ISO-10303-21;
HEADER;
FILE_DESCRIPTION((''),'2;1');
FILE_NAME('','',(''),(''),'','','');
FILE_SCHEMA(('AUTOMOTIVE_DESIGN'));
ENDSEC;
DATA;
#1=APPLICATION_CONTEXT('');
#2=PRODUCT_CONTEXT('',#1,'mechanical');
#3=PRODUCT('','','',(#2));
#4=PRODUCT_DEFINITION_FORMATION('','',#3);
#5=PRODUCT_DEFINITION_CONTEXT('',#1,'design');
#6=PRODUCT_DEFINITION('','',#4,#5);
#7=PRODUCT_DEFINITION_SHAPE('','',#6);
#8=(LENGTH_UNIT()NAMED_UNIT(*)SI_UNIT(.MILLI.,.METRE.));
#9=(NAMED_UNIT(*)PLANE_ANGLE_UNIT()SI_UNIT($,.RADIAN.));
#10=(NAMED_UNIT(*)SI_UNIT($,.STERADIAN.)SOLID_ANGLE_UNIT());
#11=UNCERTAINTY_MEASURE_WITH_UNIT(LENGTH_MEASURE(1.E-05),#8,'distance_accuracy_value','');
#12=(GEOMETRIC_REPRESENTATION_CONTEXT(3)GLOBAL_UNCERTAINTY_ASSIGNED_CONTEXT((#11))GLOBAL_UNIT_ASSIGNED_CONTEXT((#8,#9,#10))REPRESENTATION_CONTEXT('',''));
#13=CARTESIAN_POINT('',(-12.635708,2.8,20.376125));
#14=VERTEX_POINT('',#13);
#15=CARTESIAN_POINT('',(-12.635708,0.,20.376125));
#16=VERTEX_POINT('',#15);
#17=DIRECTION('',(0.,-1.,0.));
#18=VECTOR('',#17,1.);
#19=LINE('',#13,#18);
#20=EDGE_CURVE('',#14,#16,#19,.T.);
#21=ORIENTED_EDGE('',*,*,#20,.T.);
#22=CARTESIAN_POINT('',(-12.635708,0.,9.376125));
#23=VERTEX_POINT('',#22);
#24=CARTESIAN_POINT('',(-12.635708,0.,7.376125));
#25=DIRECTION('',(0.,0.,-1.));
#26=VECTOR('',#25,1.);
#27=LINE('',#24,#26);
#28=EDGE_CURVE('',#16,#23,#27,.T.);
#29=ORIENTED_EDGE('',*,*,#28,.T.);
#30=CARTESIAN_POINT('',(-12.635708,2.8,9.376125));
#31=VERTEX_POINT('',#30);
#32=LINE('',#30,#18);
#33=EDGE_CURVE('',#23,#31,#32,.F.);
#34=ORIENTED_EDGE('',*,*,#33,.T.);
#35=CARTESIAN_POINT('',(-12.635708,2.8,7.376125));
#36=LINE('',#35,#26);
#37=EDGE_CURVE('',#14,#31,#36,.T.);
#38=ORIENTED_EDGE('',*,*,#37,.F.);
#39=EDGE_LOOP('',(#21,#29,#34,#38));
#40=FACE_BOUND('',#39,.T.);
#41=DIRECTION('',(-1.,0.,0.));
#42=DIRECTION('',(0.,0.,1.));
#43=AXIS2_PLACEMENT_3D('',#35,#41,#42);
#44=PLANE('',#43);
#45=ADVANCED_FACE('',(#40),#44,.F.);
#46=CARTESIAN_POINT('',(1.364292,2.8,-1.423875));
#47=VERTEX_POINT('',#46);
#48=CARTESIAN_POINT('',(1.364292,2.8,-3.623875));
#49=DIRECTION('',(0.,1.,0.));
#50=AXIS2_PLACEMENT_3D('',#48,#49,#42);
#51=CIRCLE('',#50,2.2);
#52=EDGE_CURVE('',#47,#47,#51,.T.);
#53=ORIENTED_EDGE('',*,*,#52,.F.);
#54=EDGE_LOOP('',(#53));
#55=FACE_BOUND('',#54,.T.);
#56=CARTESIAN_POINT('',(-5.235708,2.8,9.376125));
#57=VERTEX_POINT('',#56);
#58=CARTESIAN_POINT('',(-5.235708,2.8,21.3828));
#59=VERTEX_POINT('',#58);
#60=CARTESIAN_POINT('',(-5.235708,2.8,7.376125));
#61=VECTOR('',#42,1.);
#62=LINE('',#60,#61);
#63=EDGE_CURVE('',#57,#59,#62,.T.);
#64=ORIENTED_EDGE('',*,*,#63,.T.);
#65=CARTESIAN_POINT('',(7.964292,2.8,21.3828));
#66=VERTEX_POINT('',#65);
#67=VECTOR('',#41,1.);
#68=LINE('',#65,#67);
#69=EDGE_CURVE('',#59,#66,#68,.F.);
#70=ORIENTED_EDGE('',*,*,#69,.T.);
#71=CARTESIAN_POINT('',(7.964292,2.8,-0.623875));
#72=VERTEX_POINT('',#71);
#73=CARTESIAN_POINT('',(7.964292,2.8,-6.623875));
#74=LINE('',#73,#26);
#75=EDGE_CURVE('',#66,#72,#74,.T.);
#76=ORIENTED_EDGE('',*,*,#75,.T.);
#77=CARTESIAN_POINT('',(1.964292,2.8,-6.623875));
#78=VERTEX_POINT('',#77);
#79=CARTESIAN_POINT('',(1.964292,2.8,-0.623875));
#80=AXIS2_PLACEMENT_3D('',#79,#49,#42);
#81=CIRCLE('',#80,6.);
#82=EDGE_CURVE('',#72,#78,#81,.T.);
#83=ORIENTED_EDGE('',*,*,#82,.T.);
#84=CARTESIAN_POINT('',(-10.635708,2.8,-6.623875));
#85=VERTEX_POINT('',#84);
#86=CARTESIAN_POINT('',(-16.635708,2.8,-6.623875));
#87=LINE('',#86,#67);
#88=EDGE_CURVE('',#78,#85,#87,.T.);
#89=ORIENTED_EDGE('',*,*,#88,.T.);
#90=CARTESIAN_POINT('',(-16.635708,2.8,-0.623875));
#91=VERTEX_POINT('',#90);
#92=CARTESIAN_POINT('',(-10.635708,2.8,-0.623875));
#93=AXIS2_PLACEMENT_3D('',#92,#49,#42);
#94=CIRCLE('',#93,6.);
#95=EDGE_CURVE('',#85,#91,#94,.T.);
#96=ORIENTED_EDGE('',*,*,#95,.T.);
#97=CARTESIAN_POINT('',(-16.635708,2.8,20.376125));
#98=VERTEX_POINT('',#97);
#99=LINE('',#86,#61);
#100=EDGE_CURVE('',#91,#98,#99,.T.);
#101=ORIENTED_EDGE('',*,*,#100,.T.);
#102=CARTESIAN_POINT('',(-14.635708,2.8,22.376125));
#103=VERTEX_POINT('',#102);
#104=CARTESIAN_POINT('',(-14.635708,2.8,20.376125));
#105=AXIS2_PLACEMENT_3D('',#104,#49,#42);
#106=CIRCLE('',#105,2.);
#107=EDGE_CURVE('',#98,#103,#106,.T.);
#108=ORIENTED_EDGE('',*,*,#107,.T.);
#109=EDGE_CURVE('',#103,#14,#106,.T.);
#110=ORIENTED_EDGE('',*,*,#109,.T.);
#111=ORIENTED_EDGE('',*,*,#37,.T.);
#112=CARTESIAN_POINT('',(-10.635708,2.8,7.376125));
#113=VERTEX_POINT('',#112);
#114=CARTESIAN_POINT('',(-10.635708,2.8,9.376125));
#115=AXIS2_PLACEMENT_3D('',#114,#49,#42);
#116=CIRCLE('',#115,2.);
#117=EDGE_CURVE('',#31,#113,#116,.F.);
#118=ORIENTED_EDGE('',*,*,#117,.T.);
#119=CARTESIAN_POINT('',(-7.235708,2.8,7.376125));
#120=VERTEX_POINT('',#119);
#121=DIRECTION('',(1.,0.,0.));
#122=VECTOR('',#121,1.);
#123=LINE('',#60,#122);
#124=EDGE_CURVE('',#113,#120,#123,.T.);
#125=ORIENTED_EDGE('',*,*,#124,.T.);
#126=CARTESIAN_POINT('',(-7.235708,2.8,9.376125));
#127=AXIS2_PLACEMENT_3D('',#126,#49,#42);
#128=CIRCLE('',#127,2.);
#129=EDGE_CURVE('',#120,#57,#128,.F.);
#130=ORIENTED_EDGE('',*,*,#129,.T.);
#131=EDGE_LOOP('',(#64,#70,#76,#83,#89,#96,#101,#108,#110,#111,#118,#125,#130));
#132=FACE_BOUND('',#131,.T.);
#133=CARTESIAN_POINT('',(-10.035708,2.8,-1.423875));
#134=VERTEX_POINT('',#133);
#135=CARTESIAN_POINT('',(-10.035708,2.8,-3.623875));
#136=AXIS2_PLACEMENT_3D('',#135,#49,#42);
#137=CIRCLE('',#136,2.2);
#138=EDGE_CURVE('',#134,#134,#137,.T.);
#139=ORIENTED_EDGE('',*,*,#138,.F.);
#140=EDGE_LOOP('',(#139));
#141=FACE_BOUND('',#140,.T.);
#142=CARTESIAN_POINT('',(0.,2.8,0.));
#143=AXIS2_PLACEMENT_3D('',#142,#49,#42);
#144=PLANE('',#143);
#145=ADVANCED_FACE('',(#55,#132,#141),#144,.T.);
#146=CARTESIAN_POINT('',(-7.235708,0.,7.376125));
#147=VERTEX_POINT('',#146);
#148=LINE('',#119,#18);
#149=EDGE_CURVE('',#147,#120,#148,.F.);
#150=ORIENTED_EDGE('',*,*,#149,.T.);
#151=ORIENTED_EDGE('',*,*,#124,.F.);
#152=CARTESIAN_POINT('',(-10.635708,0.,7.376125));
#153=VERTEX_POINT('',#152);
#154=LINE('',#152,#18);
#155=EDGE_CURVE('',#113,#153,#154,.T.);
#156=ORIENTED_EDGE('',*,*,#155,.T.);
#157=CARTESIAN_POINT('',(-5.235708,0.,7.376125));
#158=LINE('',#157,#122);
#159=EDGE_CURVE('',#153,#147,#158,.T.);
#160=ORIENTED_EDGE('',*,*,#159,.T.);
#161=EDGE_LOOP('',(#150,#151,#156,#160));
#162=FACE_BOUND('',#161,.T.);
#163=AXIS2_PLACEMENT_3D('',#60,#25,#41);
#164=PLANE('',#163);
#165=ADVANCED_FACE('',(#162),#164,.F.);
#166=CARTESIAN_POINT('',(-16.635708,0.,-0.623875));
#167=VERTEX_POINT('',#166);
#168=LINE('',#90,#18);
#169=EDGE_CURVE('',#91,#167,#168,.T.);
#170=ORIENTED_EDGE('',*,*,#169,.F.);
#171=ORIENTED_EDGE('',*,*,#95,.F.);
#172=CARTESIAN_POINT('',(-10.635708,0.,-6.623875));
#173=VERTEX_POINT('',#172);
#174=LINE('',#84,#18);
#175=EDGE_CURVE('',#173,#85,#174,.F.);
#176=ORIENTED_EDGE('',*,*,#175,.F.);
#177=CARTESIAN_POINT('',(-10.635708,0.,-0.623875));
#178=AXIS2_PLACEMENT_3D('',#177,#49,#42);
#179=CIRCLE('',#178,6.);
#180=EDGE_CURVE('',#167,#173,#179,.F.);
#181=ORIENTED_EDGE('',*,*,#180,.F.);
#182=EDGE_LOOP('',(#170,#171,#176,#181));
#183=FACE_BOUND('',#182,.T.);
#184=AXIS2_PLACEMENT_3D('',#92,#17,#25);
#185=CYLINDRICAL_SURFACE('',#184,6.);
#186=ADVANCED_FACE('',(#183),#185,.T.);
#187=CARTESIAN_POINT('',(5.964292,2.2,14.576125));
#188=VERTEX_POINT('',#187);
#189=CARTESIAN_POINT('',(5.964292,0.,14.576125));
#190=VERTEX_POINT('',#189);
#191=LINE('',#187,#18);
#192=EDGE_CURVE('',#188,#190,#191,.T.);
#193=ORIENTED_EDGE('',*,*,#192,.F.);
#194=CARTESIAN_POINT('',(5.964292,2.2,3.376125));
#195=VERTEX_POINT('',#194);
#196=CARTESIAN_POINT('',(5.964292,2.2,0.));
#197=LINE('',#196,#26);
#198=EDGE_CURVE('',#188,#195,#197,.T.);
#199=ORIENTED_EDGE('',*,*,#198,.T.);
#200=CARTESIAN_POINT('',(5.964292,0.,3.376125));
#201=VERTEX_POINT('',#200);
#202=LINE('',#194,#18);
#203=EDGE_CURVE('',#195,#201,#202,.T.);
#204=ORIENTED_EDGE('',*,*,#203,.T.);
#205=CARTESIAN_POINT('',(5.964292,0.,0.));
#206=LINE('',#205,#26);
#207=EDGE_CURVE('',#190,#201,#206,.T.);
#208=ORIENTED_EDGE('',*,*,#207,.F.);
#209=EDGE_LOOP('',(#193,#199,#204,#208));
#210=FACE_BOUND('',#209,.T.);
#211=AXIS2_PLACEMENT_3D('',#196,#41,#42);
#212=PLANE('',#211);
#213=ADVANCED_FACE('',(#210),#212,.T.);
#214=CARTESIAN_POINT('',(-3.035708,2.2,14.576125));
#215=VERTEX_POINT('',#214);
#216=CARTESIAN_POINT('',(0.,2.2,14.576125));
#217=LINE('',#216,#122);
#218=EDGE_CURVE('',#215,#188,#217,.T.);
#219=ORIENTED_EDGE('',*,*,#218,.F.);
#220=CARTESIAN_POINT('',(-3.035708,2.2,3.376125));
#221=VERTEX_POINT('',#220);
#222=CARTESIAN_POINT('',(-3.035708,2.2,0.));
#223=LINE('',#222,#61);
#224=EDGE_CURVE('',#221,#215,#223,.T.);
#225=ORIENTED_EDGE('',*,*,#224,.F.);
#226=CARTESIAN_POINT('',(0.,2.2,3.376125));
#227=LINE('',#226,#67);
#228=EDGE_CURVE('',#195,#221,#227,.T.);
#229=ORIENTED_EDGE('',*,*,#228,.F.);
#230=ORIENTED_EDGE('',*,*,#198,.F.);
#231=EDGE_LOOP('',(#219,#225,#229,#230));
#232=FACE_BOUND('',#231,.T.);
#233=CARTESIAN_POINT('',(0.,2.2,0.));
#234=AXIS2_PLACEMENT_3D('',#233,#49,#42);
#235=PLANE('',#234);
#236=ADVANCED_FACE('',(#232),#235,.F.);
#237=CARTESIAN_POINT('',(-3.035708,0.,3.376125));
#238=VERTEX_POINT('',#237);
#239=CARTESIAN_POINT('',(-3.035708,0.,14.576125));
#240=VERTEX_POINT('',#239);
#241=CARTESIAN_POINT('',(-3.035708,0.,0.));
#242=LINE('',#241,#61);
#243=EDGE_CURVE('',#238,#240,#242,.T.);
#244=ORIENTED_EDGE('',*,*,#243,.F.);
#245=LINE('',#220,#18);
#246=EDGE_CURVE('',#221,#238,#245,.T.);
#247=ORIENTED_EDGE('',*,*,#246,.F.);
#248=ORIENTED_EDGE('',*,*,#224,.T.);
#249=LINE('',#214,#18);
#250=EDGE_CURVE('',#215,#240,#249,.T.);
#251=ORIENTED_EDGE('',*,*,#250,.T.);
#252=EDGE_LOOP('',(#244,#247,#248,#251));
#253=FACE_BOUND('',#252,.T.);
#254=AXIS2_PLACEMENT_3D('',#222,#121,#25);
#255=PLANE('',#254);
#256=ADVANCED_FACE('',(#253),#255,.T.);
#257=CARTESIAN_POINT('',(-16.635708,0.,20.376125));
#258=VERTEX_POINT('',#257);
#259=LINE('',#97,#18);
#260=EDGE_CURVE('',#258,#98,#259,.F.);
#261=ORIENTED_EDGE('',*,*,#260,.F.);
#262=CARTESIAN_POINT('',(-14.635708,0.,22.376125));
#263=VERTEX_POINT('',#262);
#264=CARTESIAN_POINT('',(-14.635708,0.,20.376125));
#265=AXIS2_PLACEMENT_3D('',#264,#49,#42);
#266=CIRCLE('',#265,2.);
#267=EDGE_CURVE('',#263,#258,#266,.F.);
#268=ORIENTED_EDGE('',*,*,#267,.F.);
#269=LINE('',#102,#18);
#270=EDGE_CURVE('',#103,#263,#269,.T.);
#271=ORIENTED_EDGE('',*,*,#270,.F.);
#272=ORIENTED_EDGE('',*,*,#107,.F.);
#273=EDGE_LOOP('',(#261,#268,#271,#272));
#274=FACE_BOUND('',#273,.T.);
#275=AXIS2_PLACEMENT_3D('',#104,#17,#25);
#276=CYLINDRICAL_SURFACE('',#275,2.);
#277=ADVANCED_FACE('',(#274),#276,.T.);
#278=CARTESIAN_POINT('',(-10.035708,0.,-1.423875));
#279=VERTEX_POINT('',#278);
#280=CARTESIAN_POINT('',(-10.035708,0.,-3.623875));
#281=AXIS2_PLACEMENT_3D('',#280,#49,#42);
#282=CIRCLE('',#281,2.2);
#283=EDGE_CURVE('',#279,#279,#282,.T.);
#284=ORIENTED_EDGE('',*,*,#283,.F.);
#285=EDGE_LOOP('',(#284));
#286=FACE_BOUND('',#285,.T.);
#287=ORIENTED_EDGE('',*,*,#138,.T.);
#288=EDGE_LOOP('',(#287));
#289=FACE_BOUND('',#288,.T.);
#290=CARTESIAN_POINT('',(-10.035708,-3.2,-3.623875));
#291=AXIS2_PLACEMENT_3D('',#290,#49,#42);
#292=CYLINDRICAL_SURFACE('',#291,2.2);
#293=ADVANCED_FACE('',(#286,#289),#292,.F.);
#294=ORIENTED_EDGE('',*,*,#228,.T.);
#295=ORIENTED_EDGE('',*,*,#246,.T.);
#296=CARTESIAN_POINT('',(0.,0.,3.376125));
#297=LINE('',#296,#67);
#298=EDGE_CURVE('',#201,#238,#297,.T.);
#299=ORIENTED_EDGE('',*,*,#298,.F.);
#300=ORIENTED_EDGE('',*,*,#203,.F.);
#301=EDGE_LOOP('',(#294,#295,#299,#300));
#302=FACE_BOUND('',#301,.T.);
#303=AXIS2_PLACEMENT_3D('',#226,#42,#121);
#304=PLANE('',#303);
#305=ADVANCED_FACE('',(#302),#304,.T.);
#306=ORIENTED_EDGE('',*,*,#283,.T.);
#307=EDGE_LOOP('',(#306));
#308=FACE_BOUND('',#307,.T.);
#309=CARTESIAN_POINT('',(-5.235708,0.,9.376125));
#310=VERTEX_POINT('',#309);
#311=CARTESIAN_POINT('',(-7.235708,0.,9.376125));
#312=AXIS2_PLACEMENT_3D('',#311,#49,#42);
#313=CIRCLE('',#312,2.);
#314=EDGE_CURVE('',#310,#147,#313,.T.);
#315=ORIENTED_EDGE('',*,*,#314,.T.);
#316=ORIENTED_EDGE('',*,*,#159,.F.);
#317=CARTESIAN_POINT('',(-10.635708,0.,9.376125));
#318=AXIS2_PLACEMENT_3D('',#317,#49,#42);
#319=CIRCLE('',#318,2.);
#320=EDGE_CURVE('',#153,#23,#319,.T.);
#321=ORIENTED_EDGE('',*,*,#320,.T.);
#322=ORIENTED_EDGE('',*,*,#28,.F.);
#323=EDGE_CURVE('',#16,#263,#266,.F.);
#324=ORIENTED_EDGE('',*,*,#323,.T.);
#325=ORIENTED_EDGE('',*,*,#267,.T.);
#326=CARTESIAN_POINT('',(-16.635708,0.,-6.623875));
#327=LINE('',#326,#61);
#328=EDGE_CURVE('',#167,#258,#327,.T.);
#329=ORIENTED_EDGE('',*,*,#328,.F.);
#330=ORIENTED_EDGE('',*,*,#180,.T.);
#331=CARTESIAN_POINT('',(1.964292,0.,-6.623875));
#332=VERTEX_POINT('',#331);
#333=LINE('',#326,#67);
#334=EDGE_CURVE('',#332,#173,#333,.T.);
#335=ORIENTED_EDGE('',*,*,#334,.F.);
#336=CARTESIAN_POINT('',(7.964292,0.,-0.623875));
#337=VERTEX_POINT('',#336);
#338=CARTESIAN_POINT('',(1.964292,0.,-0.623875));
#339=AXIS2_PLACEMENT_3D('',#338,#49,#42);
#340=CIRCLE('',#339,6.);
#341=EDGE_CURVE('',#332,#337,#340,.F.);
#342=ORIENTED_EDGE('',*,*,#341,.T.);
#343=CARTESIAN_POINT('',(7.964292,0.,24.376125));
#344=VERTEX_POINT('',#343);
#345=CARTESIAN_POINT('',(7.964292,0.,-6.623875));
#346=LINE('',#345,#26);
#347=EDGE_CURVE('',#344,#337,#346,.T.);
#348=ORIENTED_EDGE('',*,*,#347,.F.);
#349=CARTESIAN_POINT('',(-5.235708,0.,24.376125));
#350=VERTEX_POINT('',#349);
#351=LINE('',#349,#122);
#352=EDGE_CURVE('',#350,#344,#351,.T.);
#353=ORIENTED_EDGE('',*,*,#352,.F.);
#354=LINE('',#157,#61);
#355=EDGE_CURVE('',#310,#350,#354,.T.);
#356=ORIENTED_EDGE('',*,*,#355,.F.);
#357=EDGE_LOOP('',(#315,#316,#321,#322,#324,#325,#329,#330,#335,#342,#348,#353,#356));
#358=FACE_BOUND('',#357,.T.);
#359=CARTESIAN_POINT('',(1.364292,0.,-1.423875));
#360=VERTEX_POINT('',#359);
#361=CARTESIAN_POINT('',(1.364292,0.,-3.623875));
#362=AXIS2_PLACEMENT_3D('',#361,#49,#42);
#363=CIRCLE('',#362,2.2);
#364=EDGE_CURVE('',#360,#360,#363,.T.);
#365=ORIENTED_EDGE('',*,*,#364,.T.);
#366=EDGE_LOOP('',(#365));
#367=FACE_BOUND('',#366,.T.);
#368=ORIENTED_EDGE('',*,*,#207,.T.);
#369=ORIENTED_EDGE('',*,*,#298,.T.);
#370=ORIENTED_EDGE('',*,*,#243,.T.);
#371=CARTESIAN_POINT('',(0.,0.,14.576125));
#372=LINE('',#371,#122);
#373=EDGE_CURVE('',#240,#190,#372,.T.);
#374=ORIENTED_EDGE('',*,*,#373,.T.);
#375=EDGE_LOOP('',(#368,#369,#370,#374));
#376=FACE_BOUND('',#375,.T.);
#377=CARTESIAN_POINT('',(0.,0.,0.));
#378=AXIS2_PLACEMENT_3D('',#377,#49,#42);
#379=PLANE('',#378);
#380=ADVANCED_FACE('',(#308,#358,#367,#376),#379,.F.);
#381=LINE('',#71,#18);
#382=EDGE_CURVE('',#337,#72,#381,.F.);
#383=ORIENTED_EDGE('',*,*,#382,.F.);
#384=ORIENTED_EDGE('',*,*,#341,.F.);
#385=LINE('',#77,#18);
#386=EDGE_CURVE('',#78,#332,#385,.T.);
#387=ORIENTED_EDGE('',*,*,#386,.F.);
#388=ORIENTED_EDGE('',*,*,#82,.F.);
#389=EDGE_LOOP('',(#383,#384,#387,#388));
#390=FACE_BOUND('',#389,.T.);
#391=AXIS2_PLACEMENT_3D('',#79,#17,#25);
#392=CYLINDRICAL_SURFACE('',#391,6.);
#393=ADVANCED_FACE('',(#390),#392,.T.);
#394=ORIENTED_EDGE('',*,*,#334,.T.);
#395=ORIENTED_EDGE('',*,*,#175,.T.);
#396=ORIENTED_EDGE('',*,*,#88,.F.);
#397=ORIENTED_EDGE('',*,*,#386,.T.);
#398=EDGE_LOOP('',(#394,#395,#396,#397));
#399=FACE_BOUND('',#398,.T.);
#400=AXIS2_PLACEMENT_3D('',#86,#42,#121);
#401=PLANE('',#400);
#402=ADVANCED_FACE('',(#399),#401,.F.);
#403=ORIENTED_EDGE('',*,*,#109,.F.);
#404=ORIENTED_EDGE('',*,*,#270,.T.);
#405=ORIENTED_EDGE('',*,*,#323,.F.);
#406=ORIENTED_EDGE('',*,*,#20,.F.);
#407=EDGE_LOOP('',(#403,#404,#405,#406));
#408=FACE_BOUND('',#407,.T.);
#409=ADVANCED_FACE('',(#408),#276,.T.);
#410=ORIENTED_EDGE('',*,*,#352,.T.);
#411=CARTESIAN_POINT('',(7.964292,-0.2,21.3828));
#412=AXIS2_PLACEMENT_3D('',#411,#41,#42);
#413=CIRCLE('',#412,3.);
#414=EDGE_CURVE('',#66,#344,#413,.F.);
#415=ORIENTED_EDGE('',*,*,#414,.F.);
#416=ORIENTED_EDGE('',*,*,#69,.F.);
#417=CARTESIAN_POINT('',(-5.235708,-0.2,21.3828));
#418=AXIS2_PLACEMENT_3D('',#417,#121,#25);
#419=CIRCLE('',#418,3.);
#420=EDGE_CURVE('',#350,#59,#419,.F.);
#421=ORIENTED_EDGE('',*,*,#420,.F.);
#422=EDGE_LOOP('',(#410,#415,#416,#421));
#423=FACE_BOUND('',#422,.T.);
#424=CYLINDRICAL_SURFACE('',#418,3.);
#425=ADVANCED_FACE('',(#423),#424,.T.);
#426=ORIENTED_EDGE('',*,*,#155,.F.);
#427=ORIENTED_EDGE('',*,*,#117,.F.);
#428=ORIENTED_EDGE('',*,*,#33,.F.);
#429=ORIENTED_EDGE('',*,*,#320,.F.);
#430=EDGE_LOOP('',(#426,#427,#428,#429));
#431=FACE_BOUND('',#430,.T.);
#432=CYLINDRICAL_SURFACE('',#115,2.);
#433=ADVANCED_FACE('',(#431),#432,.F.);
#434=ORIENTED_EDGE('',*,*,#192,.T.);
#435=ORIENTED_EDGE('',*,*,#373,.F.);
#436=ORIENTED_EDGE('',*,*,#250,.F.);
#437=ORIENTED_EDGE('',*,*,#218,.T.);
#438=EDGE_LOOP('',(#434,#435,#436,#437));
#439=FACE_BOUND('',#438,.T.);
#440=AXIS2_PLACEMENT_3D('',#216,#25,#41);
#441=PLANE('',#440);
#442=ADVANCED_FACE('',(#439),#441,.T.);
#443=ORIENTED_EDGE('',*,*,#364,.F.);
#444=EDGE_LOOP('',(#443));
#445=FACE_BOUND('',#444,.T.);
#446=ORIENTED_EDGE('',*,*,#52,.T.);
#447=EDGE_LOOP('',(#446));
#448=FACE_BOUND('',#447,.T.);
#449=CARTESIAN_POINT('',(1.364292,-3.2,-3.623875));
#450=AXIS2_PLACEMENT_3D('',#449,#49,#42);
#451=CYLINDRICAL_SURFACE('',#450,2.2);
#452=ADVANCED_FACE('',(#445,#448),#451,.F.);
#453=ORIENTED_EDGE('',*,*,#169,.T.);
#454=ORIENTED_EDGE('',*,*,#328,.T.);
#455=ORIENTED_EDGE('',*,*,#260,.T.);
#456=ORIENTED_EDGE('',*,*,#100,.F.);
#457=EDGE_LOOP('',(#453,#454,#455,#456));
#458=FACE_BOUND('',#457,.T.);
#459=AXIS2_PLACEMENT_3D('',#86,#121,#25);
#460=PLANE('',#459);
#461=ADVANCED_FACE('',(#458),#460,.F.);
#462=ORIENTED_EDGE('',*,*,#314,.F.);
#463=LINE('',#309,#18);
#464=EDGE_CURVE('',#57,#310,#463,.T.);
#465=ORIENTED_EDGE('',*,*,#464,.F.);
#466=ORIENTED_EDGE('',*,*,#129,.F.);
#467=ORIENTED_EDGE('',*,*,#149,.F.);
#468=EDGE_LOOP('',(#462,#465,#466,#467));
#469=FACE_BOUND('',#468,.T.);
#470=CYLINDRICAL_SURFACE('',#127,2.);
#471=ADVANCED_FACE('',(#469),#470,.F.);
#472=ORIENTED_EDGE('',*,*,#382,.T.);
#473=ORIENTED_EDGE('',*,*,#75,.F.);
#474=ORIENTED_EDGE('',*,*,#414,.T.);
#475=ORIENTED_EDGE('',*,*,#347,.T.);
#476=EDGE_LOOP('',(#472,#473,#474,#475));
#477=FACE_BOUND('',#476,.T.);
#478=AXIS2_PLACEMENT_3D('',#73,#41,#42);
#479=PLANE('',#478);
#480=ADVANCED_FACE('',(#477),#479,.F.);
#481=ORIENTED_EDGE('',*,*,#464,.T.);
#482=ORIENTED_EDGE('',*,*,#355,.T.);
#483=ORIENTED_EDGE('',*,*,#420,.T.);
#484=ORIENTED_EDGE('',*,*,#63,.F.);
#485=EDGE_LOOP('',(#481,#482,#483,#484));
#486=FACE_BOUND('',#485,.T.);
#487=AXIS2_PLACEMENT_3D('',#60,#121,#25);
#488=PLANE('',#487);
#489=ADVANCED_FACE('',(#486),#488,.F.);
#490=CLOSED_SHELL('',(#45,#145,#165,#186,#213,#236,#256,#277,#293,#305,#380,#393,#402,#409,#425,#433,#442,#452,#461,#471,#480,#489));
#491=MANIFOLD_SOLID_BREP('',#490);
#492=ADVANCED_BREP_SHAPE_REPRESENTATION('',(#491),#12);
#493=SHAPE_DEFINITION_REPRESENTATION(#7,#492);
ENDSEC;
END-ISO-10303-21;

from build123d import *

# Parameters (mm, degrees)
BOSS_EXTRUDE1_DEPTH = 2.8
SKETCH4_R           = 2.2
CUT_EXTRUDE3_DEPTH  = 6
FILLET1_R           = 6
FILLET2_START       = -1
FILLET2_DEPTH       = 5
FILLET2_2_DEPTH     = 2.8
CUT_EXTRUDE7_START  = -2.8
SKETCH7_W           = 9
SKETCH7_H           = 11.2
CUT_EXTRUDE7_DEPTH  = 2.2
FILLET5_R           = 3


with BuildPart() as part:
    # Sketch1 → Boss-Extrude1 (new body)
    with BuildSketch(Plane(origin=(0, 0, 0), x_dir=(1, 0, 0), z_dir=(0, 1, 0))):
        Polygon((-16.635707691, 6.623874564), (7.964292309, 6.623874564), (7.964292309, -24.376125436), (-5.235707691, -24.376125436), (-5.235707691, -7.376125436), (-12.635707691, -7.376125436), (-12.635707691, -22.376125436), (-16.635707691, -22.376125436), align=None)
    extrude(amount=BOSS_EXTRUDE1_DEPTH)

    # Sketch4 → Cut-Extrude3 (cut)
    with BuildSketch(Plane(origin=(0, 2.8, 0), x_dir=(1, 0, 0), z_dir=(0, 1, 0))):
        with Locations(Location((-10.035707691, 3.623874564, 0), (0, 0, 270))):
            Circle(SKETCH4_R)
        with Locations(Location((1.364292309, 3.623874564, 0), (0, 0, 270))):
            Circle(SKETCH4_R)
    extrude(amount=-CUT_EXTRUDE3_DEPTH, mode=Mode.SUBTRACT)

    # Fillet1
    fillet1_edges = [part.edges().sort_by_distance(p)[0] for p in [
        (-16.635707691, 1.4, -6.623874564),
        (7.964292309, 1.4, -6.623874564),
    ]]
    fillet(fillet1_edges, radius=FILLET1_R)

    # Fillet2: read off the stored shape, not the designer's step
    # Fillet2 outline → Fillet2 (cut)
    with BuildSketch(Plane(origin=(0, 0, 0), x_dir=(1, 0, 0), z_dir=(0, 1, 0)).offset(FILLET2_START)):
        with BuildLine():
            Line((-16.635707691, -22.376125436), (-14.635707691, -22.376125436))
            ThreePointArc((-14.635707691, -22.376125436), (-16.049921254, -21.790338998), (-16.635707691, -20.376125436))
            Line((-16.635707691, -20.376125436), (-16.635707691, -22.376125436))
        make_face()
        with BuildLine():
            Line((-12.635707691, -22.376125436), (-12.635707691, -20.376125436))
            ThreePointArc((-12.635707691, -20.376125436), (-13.221494128, -21.790338999), (-14.635707691, -22.376125436))
            Line((-14.635707691, -22.376125436), (-12.635707691, -22.376125436))
        make_face()
    extrude(amount=FILLET2_DEPTH, mode=Mode.SUBTRACT)

    # Fillet2 2 outline → Fillet2 2 (add)
    with BuildSketch(Plane(origin=(0, 0, 0), x_dir=(1, 0, 0), z_dir=(0, 1, 0))):
        with BuildLine():
            ThreePointArc((-12.635707691, -9.376125436), (-12.049921253, -7.961911874), (-10.635707691, -7.376125436))
            Line((-10.635707691, -7.376125436), (-12.635707691, -7.376125436))
            Line((-12.635707691, -7.376125436), (-12.635707691, -9.376125436))
        make_face()
        with BuildLine():
            ThreePointArc((-7.235707691, -7.376125436), (-5.821494128, -7.961911874), (-5.235707691, -9.376125436))
            Line((-5.235707691, -9.376125436), (-5.235707691, -7.376125436))
            Line((-5.235707691, -7.376125436), (-7.235707691, -7.376125436))
        make_face()
    extrude(amount=FILLET2_2_DEPTH)

    # Sketch7 → Cut-Extrude7 (cut)
    with BuildSketch(Plane(origin=(0, 2.8, 0), x_dir=(1, 0, 0), z_dir=(0, 1, 0)).offset(CUT_EXTRUDE7_START)):
        with Locations((1.464292309, -8.976125436)):
            Rectangle(SKETCH7_W, SKETCH7_H)
    extrude(amount=CUT_EXTRUDE7_DEPTH, mode=Mode.SUBTRACT)

    # Fillet5
    # the kernel refuses this fillet: 3 mm, written as the material it takes off along each edge
    with BuildSketch(Plane(origin=(15.447607083, 2.8, 24.376125436), x_dir=(0, 0, -1), z_dir=(-1, 0, 0))) as fillet5_piece_1:
        with BuildLine():
            CenterArc((2.993325909, 3), FILLET5_R, 183.822553729, 86.177446271)
            Line((0, 2.8), (-0.059866518, 2.796))
            ThreePointArc((-0.059866518, 2.796), (-0.06, 1.4), (-0.06, 0))
            Line((-0.06, 0), (0, -0.06))
            Line((0, -0.06), (2.993325909, -0.06))
            Line((2.993325909, -0.06), (2.993325909, 0))
        make_face()
    extrude(amount=28.166629547, mode=Mode.SUBTRACT)


solid = part.part
